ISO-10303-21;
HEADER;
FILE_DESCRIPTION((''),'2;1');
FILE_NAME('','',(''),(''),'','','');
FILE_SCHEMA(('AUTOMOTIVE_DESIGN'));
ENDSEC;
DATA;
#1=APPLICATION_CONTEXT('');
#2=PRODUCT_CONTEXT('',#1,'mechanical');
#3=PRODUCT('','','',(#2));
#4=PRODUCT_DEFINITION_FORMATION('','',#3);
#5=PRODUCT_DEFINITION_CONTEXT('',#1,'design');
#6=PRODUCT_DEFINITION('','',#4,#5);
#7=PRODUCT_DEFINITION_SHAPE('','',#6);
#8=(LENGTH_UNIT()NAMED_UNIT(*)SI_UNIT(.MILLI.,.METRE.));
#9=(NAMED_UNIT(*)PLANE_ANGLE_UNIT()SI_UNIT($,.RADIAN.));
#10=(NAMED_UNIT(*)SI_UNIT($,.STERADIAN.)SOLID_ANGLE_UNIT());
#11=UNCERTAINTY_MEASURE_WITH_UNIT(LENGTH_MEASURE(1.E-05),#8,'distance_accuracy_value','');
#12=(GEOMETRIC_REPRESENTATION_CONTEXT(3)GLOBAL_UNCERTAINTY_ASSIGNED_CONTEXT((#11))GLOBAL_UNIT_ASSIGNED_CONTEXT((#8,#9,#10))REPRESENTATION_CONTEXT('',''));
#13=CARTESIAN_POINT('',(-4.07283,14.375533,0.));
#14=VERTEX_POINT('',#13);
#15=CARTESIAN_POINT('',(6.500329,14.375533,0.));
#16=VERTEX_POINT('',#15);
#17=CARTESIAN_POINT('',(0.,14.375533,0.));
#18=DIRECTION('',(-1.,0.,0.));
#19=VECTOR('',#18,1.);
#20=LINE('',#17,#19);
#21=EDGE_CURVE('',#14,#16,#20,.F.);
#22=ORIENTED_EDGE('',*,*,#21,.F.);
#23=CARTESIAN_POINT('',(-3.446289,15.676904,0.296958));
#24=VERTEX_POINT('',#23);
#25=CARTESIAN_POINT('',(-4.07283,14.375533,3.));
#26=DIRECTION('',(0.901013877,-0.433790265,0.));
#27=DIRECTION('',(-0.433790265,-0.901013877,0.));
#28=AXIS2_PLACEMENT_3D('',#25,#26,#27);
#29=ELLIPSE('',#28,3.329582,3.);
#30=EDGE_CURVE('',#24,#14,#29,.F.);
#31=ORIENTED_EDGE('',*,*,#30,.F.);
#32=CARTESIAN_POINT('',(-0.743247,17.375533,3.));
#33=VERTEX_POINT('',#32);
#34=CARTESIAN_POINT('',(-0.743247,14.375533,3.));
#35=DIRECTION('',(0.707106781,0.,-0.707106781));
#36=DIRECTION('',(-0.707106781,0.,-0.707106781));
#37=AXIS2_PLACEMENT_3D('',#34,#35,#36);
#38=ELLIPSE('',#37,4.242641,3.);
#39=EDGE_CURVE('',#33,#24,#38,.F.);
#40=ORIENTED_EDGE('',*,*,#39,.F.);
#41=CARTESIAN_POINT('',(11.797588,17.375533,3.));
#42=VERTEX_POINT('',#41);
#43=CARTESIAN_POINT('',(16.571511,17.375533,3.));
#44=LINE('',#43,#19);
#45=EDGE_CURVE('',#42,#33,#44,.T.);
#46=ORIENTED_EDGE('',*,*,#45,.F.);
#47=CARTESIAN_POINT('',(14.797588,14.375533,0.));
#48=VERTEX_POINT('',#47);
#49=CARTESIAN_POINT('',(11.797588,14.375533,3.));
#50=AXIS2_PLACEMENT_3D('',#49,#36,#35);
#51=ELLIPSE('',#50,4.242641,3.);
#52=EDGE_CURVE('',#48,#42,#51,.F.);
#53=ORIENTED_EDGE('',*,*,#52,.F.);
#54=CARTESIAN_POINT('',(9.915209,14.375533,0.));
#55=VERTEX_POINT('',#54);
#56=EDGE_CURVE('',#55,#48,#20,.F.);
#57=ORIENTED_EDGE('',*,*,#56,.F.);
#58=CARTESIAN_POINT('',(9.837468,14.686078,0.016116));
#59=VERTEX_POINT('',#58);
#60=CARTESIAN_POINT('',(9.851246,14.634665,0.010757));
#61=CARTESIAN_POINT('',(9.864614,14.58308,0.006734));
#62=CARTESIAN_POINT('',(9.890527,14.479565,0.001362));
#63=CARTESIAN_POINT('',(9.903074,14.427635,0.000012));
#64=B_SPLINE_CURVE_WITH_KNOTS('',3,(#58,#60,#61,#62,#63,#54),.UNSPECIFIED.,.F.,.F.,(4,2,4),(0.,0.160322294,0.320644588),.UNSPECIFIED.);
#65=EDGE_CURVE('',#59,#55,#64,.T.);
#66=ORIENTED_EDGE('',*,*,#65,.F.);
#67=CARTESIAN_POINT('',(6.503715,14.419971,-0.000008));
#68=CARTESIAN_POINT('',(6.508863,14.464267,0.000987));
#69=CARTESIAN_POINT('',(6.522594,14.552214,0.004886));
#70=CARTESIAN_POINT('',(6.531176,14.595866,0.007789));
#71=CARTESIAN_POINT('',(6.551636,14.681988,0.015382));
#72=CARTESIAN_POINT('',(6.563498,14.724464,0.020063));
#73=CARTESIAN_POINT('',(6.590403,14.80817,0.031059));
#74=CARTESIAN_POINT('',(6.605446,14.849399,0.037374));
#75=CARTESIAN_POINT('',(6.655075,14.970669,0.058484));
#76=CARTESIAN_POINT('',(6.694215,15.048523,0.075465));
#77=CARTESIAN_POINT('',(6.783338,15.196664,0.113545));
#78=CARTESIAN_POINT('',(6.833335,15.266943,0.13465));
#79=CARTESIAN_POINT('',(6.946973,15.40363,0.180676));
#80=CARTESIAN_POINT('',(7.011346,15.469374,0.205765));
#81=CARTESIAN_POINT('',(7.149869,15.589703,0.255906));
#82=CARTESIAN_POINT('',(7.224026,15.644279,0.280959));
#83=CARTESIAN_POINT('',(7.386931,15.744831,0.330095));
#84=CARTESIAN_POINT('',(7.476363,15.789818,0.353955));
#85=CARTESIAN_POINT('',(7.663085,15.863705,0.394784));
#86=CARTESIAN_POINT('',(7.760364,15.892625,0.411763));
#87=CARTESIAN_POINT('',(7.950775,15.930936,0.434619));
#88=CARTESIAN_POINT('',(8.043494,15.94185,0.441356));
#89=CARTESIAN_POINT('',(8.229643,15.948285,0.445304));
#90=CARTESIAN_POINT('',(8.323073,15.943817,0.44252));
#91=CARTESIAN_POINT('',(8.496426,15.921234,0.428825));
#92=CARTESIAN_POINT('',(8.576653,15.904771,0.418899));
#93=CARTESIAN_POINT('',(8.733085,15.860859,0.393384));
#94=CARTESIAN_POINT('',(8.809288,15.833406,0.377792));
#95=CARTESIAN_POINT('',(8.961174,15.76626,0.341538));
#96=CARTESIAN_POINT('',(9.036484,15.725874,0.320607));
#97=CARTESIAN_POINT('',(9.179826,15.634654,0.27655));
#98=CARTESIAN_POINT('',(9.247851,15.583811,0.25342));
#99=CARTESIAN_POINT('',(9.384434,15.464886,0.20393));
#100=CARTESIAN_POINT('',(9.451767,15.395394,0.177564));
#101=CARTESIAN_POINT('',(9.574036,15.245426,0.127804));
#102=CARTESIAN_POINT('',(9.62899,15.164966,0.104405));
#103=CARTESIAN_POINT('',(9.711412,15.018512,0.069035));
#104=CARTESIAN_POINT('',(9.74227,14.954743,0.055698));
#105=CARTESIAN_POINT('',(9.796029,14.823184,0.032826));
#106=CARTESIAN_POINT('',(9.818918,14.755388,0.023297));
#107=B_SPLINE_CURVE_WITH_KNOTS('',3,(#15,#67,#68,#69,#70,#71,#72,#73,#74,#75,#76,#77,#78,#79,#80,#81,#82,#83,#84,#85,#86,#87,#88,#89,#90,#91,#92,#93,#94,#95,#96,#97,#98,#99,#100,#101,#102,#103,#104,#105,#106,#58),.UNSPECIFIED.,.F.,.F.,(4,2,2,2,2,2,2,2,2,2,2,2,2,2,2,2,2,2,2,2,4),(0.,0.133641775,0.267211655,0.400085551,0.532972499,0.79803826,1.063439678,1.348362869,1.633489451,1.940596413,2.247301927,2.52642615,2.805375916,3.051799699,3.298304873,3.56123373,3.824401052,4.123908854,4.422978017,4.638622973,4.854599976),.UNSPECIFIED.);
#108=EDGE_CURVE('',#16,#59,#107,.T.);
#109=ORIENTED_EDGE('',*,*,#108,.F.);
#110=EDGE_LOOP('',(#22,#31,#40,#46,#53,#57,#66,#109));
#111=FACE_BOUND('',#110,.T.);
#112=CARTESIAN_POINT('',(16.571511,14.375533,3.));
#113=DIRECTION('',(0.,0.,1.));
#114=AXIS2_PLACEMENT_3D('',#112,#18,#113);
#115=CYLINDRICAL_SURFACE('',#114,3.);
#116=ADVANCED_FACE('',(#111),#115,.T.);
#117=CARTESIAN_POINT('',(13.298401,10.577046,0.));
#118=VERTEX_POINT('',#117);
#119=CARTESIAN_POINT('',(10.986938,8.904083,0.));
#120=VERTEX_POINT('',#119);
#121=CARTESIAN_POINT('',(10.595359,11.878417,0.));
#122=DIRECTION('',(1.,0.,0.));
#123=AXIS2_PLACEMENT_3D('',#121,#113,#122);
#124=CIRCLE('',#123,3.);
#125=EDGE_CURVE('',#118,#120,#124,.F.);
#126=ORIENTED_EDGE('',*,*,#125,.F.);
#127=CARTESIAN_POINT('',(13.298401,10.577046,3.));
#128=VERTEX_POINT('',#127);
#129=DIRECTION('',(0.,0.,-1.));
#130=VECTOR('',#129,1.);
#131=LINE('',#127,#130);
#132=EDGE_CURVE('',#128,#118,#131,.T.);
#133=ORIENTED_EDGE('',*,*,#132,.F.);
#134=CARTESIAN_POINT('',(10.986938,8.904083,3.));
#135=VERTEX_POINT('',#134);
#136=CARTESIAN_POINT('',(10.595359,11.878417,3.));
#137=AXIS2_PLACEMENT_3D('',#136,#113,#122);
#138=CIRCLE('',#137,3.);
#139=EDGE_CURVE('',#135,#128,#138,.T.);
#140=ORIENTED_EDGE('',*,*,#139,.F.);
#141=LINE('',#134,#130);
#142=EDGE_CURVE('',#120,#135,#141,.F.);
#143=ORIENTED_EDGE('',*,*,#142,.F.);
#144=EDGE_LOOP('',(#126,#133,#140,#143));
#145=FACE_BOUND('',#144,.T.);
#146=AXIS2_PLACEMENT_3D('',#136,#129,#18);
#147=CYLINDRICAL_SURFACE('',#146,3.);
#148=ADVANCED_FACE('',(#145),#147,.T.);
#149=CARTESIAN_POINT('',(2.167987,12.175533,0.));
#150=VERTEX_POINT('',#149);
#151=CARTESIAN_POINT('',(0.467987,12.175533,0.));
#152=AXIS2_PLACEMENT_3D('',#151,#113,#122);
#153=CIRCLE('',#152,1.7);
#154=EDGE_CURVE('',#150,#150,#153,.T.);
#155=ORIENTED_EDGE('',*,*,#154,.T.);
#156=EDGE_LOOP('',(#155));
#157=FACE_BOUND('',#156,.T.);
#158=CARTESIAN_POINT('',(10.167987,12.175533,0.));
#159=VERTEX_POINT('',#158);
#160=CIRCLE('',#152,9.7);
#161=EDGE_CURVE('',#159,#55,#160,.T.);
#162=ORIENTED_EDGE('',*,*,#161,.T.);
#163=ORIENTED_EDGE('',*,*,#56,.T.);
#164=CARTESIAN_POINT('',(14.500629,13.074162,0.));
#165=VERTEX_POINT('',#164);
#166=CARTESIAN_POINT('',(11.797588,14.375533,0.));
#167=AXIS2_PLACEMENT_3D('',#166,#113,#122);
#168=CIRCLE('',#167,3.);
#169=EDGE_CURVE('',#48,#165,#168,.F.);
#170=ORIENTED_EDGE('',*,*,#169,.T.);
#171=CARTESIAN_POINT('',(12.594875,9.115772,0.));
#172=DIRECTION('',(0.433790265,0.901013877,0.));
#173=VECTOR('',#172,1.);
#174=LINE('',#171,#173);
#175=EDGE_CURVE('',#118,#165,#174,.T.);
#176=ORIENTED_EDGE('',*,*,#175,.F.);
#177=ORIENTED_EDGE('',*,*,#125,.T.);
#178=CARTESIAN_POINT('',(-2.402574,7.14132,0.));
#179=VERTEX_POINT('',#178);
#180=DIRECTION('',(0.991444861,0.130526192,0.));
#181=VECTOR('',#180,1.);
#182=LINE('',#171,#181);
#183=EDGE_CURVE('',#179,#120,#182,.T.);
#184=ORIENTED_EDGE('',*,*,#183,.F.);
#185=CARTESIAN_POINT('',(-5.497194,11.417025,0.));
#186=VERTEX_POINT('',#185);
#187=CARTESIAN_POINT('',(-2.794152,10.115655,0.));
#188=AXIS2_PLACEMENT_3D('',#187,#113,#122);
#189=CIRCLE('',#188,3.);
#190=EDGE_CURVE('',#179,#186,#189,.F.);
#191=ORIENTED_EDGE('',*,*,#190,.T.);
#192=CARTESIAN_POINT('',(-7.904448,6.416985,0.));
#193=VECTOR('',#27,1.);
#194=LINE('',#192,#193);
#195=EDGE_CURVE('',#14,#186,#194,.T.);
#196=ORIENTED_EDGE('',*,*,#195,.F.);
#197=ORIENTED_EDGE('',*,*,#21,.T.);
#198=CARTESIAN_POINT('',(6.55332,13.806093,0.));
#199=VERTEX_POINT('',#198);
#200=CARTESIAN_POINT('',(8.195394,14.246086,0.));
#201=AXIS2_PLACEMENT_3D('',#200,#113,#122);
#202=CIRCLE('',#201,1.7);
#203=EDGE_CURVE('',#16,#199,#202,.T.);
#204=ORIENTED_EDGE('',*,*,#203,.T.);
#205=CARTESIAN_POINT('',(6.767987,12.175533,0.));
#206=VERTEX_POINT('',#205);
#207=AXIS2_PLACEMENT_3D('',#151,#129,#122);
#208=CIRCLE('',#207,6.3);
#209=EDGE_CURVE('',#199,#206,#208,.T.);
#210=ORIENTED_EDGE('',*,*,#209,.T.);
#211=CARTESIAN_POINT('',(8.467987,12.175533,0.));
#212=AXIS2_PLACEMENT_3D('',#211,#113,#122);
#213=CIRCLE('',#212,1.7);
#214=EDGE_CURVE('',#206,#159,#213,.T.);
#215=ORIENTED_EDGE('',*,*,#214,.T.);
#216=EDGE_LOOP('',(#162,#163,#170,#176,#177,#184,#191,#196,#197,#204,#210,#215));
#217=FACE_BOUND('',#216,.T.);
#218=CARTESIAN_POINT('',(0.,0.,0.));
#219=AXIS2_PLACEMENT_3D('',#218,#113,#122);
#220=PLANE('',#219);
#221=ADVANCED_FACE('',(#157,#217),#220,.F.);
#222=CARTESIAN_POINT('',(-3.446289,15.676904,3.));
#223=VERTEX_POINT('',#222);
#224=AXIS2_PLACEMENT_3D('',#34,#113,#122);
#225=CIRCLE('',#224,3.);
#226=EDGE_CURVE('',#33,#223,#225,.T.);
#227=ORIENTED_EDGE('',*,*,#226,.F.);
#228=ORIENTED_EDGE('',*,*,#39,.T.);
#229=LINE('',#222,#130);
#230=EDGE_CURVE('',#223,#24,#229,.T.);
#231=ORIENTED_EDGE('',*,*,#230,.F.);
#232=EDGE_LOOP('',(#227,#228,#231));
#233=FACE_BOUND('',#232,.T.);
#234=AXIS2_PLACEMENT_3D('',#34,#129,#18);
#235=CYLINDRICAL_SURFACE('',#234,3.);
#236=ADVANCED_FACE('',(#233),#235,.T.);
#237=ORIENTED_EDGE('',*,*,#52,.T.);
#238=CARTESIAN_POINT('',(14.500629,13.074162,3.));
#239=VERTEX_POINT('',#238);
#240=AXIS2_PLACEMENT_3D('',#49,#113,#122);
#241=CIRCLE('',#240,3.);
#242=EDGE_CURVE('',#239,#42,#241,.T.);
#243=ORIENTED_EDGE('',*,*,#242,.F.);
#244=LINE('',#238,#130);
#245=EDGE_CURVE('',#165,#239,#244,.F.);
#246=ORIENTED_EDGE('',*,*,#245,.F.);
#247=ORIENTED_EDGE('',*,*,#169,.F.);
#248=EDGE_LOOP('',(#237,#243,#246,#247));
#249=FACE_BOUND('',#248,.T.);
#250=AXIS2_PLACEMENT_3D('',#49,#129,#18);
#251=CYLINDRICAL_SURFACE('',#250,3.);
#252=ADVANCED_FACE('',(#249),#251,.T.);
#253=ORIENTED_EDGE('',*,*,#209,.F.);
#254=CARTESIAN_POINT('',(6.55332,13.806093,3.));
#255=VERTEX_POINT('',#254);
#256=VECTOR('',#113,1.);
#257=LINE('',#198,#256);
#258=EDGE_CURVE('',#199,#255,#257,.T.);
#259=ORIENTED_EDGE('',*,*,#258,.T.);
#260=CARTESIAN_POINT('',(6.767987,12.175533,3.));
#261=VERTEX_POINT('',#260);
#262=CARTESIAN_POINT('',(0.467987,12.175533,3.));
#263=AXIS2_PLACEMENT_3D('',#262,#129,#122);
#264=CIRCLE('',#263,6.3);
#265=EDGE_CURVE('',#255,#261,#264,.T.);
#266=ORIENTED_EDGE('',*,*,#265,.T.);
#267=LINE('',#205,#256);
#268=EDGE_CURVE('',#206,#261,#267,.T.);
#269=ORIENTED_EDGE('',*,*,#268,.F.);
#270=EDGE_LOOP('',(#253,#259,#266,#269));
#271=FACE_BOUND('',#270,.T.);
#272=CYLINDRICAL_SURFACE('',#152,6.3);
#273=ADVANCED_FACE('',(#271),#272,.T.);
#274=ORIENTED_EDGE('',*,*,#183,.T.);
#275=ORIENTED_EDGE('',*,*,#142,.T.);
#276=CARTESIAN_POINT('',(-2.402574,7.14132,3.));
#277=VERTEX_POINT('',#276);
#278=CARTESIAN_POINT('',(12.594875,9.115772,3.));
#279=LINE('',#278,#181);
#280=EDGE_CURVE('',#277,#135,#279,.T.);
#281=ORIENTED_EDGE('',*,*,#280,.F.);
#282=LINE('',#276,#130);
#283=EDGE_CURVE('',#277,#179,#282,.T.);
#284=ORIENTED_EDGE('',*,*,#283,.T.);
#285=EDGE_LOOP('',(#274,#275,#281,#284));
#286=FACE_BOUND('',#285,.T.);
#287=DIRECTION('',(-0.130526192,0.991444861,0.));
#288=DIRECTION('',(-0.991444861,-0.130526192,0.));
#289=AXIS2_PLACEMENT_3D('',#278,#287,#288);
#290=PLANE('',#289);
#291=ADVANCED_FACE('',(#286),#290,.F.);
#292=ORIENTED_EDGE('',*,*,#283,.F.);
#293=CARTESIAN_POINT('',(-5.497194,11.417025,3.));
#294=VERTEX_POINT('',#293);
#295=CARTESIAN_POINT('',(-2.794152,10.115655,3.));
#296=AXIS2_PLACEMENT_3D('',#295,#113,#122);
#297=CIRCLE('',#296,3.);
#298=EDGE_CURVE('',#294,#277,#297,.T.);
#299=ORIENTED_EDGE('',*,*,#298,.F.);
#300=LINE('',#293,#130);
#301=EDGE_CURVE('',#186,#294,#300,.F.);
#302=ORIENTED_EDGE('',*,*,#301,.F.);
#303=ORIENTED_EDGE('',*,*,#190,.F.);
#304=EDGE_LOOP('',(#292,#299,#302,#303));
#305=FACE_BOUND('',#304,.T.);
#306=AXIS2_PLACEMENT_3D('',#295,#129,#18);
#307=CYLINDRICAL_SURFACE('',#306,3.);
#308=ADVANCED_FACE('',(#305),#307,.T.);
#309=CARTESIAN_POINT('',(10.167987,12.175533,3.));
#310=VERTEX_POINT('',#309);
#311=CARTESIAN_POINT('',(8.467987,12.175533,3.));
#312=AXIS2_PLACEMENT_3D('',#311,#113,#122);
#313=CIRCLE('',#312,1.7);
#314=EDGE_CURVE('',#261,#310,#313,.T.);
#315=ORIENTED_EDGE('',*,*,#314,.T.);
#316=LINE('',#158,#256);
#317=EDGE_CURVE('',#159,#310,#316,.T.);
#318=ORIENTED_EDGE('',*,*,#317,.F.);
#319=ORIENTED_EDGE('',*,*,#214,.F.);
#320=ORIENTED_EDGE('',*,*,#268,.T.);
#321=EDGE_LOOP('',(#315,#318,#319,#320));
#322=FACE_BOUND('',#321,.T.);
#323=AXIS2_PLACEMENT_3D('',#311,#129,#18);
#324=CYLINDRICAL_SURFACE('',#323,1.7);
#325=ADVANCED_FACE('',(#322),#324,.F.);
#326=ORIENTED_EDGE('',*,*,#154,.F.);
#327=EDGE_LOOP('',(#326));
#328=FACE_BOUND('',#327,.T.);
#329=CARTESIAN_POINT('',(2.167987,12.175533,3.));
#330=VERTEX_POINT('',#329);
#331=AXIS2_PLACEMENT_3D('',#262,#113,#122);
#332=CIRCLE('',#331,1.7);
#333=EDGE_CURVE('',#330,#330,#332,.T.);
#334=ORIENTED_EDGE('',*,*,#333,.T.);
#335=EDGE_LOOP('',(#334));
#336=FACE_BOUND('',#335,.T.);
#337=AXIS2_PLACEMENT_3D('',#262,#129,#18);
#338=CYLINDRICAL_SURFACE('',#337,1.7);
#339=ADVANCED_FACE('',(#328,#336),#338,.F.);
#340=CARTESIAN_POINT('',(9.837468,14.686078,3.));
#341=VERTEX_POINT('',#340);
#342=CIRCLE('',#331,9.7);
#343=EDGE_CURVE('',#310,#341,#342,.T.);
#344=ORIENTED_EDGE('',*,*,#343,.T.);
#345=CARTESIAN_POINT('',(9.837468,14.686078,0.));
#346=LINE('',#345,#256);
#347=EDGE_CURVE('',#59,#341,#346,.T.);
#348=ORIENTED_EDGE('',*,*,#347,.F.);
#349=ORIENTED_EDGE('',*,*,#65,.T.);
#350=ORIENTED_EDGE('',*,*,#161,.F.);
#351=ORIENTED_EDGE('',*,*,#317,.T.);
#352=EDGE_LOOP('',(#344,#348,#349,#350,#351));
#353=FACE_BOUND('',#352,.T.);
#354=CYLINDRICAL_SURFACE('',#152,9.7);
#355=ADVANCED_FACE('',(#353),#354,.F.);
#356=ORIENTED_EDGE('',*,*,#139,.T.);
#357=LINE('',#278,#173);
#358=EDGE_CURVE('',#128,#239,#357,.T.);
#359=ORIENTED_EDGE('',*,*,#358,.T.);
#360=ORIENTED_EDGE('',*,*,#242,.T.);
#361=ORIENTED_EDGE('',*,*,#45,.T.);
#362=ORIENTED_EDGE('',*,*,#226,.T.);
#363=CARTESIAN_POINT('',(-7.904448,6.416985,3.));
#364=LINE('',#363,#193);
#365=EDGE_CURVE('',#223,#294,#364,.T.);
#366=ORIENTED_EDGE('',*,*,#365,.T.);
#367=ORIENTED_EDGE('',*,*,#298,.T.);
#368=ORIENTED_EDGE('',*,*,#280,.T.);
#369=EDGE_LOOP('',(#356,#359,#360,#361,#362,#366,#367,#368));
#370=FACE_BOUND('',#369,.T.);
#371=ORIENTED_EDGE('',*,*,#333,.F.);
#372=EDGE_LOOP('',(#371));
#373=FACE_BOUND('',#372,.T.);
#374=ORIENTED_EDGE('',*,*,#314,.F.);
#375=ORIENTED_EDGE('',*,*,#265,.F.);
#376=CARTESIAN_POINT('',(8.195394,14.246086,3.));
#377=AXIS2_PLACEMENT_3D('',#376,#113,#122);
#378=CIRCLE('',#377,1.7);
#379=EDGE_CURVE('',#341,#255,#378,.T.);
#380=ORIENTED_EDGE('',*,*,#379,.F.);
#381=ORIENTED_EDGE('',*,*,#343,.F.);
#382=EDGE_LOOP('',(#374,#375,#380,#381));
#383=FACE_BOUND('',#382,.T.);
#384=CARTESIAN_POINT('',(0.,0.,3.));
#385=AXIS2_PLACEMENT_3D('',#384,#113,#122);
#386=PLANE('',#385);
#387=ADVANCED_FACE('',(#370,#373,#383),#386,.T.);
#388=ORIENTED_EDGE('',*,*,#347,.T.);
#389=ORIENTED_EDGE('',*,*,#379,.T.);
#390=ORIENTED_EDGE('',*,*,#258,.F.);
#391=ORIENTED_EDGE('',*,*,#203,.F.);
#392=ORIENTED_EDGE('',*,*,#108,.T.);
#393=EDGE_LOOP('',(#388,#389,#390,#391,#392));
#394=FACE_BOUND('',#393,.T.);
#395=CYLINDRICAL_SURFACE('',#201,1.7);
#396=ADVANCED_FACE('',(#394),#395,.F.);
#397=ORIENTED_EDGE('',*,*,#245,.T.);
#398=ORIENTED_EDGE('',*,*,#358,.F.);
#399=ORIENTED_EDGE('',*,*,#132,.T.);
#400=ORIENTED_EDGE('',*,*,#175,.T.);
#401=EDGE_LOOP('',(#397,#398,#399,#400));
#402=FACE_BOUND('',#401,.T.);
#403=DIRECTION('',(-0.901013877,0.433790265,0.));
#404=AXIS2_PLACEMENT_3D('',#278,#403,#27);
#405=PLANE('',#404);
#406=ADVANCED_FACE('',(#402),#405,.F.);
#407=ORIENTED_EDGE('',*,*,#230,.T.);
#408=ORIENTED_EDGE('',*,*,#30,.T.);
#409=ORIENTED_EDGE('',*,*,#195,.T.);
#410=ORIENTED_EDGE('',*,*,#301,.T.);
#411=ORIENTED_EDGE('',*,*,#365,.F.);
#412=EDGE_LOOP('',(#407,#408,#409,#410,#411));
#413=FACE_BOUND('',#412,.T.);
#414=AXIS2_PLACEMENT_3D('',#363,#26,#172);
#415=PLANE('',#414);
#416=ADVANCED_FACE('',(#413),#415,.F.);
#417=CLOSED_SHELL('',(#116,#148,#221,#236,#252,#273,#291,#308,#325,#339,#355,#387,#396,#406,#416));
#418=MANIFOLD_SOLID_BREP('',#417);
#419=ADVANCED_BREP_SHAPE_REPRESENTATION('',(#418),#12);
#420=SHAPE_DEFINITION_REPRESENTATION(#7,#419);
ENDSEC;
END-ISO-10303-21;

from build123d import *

# Parameters (mm, degrees)
ESQUISSE1_R             = 1.7
BOSS_EXTRU_1_DEPTH      = 3
ENL_V_MAT_EXTRU_1_DEPTH = 25.197605652
CONG_1_R                = 3
CONG_2_R                = 3


with BuildPart() as part:
    # Esquisse1 → Boss.-Extru.1 (new body)
    with BuildSketch(Plane.XY):
        Polygon((12.594874651, 9.115771584), (-7.904447763, 6.416984589), (-2.628489378, 17.375533229), (16.571510622, 17.375533229), align=None)
        with Locations((8.467987162, 12.175533229)):
            Circle(ESQUISSE1_R, mode=Mode.SUBTRACT)
        with Locations((0.467987162, 12.175533229)):
            Circle(ESQUISSE1_R, mode=Mode.SUBTRACT)
    extrude(amount=BOSS_EXTRU_1_DEPTH)

    # Esquisse2 → Enlèv. mat.-Extru.1 (cut, through all)
    with BuildSketch(Plane.XY.offset(3)):
        with BuildLine():
            ThreePointArc((6.767987162, 12.175533229), (6.714089789, 12.99784824), (6.553319868, 13.806093213))
            ThreePointArc((6.553319868, 13.806093213), (7.755401396, 15.888159494), (9.837467677, 14.686077966))
            ThreePointArc((9.837467677, 14.686077966), (10.085002318, 13.441637293), (10.167987162, 12.175533229))
            ThreePointArc((10.167987162, 12.175533229), (8.467987162, 10.475533229), (6.767987162, 12.175533229))
        make_face()
    extrude(amount=-ENL_V_MAT_EXTRU_1_DEPTH, mode=Mode.SUBTRACT)

    # Congé1
    cong_1_edges = [part.edges().sort_by_distance(p)[0] for p in [
        (-2.628489378, 17.375533229, 1.5),
        (16.571510622, 17.375533229, 1.5),
        (12.594874651, 9.115771584, 1.5),
        (-7.904447763, 6.416984589, 1.5),
    ]]
    fillet(cong_1_edges, radius=CONG_1_R)

    # Congé2
    # the kernel refuses this fillet: 3 mm, written as the material it takes off along each edge
    with BuildSketch(Plane(origin=(-8.243247375, 17.375533229, 0), x_dir=(0, -1, 0), z_dir=(1, 0, 0))) as cong_2_piece_1:
        with BuildLine():
            CenterArc((CONG_2_R, -CONG_2_R), CONG_2_R, 90, 90)
            Line((0, -CONG_2_R), (0, 0))
            Line((0, 0), (CONG_2_R, 0))
        make_face()
    extrude(amount=27.54083508, mode=Mode.SUBTRACT)


solid = part.part
